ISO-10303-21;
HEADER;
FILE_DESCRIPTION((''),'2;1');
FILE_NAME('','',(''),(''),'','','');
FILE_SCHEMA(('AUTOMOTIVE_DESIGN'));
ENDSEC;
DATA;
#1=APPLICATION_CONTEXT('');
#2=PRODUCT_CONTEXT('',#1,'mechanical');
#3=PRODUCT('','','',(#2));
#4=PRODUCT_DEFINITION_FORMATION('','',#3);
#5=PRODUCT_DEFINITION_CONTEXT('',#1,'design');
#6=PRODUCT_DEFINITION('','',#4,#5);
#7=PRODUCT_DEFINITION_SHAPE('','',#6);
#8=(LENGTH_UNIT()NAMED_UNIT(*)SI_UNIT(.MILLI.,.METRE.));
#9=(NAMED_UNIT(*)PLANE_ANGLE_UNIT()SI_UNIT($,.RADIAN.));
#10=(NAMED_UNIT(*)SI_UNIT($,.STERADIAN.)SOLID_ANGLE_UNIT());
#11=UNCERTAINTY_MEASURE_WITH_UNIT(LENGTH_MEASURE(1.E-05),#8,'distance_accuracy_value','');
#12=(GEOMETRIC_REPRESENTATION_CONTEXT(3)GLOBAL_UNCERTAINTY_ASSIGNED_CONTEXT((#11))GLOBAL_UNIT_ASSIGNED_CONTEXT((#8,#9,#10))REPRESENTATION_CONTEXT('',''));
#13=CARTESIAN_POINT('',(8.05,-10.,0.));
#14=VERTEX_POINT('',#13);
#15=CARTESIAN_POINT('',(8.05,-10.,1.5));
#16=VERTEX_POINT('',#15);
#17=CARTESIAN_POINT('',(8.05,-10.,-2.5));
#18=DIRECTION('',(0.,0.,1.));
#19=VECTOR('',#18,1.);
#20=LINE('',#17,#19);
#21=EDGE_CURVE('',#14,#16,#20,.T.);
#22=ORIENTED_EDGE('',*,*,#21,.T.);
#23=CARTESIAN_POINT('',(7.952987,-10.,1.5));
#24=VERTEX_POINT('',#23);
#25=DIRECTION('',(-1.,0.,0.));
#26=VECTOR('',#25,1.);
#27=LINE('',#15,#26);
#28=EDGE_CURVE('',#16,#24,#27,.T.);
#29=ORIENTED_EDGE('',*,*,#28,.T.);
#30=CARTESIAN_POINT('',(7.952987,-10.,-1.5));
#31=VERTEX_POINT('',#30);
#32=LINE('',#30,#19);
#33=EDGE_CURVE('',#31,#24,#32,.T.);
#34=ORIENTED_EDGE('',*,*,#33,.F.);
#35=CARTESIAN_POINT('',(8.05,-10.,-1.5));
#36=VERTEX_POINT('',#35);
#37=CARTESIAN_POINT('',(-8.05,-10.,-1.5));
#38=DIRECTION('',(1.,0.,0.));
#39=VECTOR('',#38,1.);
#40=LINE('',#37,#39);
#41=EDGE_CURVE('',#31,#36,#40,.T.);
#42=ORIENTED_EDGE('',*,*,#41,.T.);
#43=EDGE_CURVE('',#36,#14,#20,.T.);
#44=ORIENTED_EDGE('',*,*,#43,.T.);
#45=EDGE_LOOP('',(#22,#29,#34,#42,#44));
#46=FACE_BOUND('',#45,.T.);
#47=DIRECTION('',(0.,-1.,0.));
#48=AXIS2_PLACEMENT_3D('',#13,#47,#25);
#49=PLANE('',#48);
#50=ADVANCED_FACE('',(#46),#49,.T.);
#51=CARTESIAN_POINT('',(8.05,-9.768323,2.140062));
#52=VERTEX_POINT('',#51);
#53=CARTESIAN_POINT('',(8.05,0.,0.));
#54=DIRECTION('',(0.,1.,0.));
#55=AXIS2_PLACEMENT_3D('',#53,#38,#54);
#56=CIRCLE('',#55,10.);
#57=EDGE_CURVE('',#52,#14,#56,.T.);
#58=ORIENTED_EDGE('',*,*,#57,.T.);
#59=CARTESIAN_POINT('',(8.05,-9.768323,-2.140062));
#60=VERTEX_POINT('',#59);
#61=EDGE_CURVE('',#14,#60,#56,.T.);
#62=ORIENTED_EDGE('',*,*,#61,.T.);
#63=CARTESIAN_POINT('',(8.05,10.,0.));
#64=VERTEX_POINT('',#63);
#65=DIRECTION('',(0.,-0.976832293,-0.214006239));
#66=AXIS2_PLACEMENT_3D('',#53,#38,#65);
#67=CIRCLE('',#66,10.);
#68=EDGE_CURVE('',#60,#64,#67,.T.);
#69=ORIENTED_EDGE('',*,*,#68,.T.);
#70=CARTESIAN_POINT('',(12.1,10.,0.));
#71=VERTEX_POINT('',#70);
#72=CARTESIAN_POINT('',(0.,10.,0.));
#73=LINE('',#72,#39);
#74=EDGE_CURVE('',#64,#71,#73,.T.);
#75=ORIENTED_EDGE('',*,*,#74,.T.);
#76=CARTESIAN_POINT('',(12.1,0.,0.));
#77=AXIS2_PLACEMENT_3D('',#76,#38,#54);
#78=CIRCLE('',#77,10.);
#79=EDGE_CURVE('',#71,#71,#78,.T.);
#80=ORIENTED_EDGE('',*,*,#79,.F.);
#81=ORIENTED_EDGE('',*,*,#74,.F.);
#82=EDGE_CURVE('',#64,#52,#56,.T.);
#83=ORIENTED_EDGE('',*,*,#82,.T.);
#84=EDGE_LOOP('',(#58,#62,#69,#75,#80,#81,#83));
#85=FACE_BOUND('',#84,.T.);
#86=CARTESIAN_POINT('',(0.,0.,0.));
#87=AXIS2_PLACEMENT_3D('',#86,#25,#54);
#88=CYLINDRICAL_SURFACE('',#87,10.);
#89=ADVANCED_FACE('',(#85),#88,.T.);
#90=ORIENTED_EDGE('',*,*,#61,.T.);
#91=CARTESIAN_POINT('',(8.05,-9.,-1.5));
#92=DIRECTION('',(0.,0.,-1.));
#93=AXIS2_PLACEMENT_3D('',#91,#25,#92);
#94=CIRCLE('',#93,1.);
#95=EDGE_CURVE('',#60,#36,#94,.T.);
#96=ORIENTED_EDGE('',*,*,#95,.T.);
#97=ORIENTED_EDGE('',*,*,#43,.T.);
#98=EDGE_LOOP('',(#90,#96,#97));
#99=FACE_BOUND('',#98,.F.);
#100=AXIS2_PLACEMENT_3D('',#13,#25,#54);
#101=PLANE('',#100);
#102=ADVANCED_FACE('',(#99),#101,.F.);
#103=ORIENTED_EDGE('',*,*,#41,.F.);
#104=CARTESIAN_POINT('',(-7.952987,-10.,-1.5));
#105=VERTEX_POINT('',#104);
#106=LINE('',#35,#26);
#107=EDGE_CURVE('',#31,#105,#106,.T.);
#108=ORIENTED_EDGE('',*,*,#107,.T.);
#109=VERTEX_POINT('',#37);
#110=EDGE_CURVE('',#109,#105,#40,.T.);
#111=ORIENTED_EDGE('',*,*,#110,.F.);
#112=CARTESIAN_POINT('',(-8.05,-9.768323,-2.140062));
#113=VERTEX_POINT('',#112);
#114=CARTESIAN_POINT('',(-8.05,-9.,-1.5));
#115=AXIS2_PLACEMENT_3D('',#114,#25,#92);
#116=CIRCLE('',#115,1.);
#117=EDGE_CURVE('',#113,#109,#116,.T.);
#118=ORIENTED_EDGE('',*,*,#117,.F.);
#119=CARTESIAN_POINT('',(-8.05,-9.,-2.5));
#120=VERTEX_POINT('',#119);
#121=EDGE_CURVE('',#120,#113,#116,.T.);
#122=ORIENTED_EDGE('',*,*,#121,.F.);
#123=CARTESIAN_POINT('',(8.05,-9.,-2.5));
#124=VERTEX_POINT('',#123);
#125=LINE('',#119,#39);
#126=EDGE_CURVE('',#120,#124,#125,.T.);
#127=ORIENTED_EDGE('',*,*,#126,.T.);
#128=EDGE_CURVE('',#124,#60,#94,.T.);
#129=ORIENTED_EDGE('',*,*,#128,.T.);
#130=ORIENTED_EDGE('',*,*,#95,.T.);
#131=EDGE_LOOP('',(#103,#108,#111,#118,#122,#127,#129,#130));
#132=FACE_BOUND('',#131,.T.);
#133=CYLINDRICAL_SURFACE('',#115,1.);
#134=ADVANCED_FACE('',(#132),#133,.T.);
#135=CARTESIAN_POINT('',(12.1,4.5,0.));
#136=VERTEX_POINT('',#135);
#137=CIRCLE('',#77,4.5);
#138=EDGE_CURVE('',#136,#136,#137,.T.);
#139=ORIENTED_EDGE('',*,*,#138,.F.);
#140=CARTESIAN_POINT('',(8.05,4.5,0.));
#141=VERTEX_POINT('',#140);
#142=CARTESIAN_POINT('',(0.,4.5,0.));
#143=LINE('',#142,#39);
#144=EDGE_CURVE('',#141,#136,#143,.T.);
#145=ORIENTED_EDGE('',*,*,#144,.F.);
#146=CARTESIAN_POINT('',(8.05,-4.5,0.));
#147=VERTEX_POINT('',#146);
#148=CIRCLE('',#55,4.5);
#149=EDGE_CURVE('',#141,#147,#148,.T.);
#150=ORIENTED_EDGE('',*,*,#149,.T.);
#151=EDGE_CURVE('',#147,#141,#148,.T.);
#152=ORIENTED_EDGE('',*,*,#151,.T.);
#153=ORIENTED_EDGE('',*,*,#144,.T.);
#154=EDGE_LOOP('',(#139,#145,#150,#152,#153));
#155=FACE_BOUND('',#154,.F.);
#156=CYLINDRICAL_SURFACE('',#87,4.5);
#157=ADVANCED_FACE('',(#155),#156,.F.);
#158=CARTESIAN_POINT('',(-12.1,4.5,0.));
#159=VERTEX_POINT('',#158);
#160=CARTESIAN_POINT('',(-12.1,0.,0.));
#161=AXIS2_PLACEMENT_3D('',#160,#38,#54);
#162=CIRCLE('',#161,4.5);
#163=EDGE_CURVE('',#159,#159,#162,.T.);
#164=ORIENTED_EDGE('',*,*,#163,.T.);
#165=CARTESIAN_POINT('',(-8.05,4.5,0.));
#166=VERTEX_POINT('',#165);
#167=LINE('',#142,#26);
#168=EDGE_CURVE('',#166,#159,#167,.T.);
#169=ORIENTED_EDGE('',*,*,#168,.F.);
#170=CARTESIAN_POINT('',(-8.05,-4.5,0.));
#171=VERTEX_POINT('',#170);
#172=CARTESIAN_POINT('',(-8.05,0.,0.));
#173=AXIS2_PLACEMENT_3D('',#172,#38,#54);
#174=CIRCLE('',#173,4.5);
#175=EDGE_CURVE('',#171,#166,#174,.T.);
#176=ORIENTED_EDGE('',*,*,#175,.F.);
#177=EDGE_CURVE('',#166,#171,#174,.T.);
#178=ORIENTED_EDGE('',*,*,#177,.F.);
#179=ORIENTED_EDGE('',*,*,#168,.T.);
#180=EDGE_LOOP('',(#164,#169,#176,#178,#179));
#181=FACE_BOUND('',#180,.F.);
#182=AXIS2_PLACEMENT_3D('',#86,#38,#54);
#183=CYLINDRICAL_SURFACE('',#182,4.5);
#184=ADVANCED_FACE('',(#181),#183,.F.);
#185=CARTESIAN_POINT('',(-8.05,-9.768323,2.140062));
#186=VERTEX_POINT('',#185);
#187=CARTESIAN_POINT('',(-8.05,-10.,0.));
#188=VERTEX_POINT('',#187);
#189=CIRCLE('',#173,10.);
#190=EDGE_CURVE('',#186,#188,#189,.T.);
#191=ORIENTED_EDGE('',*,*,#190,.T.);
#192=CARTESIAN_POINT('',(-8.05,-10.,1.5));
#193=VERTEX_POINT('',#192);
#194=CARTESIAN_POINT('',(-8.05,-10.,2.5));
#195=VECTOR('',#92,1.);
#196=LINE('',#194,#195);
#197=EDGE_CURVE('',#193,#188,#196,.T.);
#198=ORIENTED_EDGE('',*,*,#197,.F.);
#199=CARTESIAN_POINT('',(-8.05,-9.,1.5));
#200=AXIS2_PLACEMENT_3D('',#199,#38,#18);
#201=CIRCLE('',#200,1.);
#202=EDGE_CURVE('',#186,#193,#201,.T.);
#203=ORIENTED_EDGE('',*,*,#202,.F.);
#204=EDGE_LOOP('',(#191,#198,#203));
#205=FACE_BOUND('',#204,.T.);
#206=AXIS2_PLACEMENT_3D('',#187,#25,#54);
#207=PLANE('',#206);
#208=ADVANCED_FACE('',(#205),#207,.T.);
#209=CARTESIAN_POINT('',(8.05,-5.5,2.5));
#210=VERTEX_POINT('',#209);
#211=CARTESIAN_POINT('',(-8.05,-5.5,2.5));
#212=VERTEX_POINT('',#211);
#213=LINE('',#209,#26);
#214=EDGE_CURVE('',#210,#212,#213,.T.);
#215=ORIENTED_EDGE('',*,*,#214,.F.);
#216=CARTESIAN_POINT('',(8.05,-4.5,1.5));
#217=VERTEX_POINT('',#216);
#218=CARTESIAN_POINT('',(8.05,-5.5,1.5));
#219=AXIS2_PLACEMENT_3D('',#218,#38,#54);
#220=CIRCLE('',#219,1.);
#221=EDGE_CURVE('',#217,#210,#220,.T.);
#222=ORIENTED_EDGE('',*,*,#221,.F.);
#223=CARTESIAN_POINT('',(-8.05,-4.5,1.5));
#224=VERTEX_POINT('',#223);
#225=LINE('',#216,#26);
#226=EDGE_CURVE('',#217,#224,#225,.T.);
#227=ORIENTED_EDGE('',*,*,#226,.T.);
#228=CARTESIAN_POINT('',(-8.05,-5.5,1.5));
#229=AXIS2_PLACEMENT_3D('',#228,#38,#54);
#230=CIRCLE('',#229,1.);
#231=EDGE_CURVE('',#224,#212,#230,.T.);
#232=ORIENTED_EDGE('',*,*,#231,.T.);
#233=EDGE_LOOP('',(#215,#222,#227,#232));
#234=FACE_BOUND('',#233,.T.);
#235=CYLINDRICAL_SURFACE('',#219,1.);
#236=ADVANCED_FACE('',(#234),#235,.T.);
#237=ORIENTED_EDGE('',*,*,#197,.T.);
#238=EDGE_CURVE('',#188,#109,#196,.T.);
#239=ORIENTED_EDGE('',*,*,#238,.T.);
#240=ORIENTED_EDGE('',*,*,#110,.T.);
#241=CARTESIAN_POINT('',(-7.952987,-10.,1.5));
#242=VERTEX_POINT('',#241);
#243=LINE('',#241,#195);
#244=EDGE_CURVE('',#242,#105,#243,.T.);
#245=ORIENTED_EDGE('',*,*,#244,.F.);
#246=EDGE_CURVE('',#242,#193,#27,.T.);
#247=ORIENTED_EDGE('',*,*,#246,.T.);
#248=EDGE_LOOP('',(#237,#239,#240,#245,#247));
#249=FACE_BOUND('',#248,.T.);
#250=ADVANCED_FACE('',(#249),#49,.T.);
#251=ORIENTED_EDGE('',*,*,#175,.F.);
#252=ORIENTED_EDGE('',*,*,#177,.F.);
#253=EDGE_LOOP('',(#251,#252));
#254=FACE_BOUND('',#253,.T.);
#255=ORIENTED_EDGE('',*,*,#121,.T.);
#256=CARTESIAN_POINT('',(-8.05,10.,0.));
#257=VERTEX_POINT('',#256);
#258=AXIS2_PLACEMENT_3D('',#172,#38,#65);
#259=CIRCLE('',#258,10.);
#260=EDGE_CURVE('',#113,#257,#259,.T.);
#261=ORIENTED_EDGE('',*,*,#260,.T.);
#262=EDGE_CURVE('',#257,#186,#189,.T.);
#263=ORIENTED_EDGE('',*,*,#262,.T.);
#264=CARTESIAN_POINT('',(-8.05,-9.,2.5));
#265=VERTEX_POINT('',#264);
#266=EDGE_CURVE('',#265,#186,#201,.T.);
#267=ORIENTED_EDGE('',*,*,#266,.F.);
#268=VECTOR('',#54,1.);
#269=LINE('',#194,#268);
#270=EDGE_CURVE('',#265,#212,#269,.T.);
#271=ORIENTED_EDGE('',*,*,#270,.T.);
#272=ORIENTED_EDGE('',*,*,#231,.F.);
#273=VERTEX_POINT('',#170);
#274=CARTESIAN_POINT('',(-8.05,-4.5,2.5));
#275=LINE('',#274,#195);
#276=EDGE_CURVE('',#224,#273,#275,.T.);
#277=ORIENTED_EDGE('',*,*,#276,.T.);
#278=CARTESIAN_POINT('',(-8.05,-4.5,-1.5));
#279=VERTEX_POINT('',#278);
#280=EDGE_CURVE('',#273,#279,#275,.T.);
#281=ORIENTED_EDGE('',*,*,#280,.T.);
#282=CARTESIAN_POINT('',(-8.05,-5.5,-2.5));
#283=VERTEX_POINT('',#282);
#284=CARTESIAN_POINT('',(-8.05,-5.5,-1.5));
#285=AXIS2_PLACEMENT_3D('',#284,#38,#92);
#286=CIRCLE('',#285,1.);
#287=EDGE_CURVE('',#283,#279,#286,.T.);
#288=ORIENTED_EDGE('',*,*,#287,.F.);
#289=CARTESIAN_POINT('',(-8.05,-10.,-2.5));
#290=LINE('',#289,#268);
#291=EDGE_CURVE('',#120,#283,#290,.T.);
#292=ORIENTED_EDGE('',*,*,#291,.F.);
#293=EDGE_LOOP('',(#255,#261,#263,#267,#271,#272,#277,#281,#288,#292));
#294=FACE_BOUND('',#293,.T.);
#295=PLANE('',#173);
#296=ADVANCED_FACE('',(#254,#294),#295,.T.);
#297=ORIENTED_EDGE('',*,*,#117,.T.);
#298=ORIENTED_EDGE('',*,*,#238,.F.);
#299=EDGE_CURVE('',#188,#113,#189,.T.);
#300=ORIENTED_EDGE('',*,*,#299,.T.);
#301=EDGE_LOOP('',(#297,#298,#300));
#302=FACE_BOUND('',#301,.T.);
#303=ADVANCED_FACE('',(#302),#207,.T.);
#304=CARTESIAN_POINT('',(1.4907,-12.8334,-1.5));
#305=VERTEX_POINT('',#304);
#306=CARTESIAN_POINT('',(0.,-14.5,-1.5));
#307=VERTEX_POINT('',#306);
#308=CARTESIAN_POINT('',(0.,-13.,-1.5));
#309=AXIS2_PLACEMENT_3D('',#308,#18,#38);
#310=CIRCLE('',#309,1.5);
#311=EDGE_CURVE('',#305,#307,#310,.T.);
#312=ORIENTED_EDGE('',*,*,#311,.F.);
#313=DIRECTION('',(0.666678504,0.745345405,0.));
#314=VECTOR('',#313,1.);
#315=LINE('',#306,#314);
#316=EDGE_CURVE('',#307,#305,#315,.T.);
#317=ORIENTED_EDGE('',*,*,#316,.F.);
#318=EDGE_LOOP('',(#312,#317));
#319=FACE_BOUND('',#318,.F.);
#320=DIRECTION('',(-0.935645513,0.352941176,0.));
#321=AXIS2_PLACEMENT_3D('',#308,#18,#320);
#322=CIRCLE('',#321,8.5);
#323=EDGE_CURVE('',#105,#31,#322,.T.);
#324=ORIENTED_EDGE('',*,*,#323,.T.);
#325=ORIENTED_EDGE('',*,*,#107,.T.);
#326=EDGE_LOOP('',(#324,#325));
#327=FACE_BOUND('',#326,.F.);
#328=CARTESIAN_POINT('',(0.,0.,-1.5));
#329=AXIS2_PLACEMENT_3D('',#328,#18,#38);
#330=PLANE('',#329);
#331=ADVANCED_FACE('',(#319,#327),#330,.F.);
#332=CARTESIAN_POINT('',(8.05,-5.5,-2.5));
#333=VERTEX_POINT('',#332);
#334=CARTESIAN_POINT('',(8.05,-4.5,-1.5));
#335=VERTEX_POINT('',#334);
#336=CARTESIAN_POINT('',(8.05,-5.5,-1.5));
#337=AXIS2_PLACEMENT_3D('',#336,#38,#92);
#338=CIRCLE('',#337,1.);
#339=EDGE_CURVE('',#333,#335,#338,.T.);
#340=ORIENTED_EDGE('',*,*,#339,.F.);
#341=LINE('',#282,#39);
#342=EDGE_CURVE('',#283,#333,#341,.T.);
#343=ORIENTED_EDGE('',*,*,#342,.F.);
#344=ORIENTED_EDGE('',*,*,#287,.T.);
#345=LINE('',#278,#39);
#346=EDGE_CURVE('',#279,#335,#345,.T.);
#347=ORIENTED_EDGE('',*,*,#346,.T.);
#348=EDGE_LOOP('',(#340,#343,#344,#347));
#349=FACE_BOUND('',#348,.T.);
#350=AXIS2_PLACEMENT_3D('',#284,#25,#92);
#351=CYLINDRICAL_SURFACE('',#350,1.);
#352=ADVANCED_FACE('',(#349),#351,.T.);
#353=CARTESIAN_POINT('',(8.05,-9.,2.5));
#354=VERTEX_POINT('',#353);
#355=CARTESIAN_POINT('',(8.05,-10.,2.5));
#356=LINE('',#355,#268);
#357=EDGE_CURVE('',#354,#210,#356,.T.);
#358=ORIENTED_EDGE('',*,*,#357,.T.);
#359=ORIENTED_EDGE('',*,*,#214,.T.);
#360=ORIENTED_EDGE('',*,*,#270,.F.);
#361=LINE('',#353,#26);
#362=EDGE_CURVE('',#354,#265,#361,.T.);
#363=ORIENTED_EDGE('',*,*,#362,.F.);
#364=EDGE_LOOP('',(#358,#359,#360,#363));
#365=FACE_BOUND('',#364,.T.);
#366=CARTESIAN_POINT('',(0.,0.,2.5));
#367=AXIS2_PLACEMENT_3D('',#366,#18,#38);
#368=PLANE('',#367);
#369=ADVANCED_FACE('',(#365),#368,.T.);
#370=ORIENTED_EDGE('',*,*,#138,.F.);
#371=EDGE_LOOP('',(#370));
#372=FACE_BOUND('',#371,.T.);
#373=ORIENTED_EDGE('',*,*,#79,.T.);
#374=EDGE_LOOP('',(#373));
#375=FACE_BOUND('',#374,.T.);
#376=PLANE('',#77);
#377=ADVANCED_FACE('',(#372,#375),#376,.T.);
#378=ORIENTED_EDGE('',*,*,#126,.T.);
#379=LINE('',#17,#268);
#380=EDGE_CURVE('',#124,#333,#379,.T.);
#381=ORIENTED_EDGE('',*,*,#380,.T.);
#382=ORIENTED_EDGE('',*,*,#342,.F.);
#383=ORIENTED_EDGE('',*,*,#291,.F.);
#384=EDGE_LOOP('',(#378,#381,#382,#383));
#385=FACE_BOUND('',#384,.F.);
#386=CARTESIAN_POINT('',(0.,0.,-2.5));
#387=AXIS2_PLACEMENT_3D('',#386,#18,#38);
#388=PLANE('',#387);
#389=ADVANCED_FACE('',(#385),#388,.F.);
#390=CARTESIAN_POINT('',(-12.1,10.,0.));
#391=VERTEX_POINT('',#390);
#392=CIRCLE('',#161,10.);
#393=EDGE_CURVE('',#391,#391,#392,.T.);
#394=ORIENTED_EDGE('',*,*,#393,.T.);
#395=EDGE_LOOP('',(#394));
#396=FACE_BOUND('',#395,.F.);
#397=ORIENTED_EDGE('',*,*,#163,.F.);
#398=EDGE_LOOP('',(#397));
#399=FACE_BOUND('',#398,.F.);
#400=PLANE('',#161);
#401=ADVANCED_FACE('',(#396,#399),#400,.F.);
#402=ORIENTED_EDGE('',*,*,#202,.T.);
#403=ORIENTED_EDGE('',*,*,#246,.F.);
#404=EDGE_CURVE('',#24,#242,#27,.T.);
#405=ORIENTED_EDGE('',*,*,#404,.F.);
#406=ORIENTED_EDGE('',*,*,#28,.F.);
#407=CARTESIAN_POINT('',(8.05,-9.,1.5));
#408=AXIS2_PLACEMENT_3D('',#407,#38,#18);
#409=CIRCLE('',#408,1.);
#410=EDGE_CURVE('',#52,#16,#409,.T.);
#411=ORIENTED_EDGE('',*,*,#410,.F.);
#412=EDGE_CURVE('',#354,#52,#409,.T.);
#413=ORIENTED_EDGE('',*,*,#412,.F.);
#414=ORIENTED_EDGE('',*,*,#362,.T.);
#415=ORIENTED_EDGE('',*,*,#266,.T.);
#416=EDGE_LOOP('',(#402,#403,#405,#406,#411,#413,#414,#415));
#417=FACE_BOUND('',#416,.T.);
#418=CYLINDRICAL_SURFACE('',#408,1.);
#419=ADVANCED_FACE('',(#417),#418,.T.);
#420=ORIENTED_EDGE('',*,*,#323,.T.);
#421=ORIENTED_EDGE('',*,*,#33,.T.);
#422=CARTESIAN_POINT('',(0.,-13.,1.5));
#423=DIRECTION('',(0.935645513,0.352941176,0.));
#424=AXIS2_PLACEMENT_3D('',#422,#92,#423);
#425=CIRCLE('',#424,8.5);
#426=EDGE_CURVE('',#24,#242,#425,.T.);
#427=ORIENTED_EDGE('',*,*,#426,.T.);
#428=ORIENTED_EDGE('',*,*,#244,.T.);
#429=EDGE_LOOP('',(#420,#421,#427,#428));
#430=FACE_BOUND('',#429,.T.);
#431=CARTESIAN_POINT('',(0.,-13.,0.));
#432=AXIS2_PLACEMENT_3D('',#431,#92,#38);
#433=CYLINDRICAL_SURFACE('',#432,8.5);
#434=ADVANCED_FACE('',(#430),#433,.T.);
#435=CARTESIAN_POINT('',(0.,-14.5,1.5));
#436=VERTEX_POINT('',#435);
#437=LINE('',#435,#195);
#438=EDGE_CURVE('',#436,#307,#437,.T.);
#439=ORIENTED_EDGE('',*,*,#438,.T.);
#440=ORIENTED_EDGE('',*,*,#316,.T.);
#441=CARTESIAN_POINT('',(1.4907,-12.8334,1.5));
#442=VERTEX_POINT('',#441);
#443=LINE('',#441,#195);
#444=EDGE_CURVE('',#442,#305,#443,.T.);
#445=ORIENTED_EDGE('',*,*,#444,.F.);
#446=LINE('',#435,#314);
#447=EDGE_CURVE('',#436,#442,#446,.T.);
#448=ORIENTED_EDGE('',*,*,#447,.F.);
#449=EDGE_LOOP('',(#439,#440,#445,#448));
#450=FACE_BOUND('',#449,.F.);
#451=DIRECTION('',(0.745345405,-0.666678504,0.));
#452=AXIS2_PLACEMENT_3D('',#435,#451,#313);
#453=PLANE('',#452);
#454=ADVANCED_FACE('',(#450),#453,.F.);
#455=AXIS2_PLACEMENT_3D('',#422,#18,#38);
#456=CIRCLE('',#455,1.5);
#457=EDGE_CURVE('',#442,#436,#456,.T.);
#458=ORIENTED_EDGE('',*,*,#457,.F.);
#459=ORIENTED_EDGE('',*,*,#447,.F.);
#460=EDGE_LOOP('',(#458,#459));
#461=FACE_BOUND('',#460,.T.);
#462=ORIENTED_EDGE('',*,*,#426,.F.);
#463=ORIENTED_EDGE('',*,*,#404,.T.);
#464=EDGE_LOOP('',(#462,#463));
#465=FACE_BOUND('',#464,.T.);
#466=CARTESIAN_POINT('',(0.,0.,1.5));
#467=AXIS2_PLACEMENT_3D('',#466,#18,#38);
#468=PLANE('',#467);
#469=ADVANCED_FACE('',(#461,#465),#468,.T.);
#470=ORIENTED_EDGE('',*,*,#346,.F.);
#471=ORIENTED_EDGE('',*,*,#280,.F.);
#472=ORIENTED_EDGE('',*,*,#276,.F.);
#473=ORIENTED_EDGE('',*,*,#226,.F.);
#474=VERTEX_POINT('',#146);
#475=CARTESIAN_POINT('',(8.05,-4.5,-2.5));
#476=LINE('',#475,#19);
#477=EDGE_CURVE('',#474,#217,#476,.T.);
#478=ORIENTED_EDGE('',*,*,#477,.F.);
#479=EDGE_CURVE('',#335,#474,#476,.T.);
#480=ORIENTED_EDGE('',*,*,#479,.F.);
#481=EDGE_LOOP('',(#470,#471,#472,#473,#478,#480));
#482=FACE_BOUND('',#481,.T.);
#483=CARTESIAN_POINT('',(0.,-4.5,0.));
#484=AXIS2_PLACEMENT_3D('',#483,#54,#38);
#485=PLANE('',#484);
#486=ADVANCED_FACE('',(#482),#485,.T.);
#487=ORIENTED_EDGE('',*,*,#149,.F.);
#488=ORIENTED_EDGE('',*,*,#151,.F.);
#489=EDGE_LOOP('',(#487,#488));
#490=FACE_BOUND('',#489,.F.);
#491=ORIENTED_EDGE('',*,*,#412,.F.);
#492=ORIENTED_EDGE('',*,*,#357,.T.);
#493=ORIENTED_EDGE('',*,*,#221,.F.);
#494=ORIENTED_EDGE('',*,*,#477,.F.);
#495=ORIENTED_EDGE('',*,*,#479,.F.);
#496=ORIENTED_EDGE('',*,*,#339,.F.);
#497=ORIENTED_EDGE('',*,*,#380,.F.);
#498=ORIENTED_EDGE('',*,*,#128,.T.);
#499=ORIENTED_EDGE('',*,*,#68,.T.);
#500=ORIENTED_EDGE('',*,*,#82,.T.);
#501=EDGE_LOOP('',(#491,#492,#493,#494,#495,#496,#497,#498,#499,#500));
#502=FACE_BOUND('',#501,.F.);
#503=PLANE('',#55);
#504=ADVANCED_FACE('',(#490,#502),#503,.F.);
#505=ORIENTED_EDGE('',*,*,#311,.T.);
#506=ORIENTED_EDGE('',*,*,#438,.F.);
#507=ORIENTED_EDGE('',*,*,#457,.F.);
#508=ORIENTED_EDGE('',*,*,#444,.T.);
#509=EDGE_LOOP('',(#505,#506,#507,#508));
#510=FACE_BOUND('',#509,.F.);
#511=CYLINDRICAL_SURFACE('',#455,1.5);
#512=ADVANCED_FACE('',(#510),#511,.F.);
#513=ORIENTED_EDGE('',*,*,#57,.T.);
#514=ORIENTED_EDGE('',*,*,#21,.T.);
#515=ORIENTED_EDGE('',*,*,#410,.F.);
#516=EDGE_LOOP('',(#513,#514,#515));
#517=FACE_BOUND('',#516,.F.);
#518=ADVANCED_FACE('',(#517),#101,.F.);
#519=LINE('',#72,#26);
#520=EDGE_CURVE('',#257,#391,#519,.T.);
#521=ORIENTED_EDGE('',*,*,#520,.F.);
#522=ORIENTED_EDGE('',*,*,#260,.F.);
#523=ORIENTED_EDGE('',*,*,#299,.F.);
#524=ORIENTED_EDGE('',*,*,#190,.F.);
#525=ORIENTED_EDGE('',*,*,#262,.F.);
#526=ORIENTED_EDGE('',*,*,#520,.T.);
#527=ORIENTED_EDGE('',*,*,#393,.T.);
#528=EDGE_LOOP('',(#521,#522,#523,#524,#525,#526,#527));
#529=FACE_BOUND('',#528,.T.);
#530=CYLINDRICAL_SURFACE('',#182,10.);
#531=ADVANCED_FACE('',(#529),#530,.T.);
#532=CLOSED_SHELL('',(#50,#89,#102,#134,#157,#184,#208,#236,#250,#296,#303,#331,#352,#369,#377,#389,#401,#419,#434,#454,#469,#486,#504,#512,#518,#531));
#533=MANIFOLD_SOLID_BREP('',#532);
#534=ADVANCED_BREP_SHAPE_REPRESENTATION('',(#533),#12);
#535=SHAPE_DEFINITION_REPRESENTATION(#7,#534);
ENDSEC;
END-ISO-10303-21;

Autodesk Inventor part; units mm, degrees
ref_plane "YZ Plane" through (0, 0, 0) normal (1, 0, 0) x (0, 1, 0)
ref_plane "XZ Plane" through (0, 0, 0) normal (0, 1, 0) x (-1, 0, 0)
ref_plane "XY Plane" through (0, 0, 0) normal (0, 0, 1) x (1, 0, 0)
sketch "Sketch1" plane through (0, 0, 0) normal (1, 0, 0) x (0, 1, 0)
  circle A0 centre (0, 0) radius 10
  circle A1 centre (0, 0) radius 4.5
  dimension "d0" = 20
  dimension "d1" = 9
extrude "Extrusion1" add sketch "Sketch1" along normal mid plane 24.2
extrude "Extrusion2" cut sketch "Sketch1" along normal mid plane 16.1
sketch "Sketch2" plane through (0, 0, 0) normal (0, 0, 1) x (1, 0, 0)
  line L0 (-8.05, -4.5) -> (-8.05, 4.5) projected
  line L1 (8.05, -10) -> (8.05, 10) projected
  line L2 (-8.05, -4.5) -> (8.05, -4.5)
  line L3 (8.05, -4.5) -> (8.05, -10)
  line L4 (8.05, -10) -> (-8.05, -10)
  line L5 (-8.05, -10) -> (-8.05, -4.5)
  circle A0 centre (0, -13) radius 8.5
  point P0 (0, 0)
  point P1 (0, -10)
  point P2 (-7.953, -10)
  point P3 (7.953, -10)
  dimension "d9" = 17
  dimension "d10" = 3
  dimension "d11" = 13
extrude "Extrusion3" add sketch "Sketch2" along normal mid plane 5 contours L4 A0 L2 L1 | L4 A0 | A0 L4 L5 L2 picked at (1.8811, -8.8812)
fillet "Fillet1" radius 1 4 edges at (0, -4.5, 2.5) (0, -4.5, -2.5) (0, -10, 2.5) (0, -10, -2.5)
extrude "Extrusion4" add sketch "Sketch2" along normal mid plane 3 contours A0 L4 picked at (-0.095, -17.4274)
sketch "Sketch3" plane through (0, 0, 1.5) normal (0, 0, 1) x (1, 0, 0)
  arc A0 (-7.953, -10) -> (7.953, -10) centre (0, -13) ccw projected
  circle A1 centre (0, -13) radius 1.5
  line L0 (0, -14.5) -> (1.4907, -12.8334)
  line L1 (-7.953, -10) -> (7.953, -10) projected
  point P0 (0, 0)
  dimension "d14" = 3
  dimension "d15" = 2.236
  dimension "d16" = 4.5
extrude "Extrusion5" cut sketch "Sketch3" against normal blind 3 contours L0 A1 picked at (0.0848, -13.7277)
properties part number "KnuclePart"
